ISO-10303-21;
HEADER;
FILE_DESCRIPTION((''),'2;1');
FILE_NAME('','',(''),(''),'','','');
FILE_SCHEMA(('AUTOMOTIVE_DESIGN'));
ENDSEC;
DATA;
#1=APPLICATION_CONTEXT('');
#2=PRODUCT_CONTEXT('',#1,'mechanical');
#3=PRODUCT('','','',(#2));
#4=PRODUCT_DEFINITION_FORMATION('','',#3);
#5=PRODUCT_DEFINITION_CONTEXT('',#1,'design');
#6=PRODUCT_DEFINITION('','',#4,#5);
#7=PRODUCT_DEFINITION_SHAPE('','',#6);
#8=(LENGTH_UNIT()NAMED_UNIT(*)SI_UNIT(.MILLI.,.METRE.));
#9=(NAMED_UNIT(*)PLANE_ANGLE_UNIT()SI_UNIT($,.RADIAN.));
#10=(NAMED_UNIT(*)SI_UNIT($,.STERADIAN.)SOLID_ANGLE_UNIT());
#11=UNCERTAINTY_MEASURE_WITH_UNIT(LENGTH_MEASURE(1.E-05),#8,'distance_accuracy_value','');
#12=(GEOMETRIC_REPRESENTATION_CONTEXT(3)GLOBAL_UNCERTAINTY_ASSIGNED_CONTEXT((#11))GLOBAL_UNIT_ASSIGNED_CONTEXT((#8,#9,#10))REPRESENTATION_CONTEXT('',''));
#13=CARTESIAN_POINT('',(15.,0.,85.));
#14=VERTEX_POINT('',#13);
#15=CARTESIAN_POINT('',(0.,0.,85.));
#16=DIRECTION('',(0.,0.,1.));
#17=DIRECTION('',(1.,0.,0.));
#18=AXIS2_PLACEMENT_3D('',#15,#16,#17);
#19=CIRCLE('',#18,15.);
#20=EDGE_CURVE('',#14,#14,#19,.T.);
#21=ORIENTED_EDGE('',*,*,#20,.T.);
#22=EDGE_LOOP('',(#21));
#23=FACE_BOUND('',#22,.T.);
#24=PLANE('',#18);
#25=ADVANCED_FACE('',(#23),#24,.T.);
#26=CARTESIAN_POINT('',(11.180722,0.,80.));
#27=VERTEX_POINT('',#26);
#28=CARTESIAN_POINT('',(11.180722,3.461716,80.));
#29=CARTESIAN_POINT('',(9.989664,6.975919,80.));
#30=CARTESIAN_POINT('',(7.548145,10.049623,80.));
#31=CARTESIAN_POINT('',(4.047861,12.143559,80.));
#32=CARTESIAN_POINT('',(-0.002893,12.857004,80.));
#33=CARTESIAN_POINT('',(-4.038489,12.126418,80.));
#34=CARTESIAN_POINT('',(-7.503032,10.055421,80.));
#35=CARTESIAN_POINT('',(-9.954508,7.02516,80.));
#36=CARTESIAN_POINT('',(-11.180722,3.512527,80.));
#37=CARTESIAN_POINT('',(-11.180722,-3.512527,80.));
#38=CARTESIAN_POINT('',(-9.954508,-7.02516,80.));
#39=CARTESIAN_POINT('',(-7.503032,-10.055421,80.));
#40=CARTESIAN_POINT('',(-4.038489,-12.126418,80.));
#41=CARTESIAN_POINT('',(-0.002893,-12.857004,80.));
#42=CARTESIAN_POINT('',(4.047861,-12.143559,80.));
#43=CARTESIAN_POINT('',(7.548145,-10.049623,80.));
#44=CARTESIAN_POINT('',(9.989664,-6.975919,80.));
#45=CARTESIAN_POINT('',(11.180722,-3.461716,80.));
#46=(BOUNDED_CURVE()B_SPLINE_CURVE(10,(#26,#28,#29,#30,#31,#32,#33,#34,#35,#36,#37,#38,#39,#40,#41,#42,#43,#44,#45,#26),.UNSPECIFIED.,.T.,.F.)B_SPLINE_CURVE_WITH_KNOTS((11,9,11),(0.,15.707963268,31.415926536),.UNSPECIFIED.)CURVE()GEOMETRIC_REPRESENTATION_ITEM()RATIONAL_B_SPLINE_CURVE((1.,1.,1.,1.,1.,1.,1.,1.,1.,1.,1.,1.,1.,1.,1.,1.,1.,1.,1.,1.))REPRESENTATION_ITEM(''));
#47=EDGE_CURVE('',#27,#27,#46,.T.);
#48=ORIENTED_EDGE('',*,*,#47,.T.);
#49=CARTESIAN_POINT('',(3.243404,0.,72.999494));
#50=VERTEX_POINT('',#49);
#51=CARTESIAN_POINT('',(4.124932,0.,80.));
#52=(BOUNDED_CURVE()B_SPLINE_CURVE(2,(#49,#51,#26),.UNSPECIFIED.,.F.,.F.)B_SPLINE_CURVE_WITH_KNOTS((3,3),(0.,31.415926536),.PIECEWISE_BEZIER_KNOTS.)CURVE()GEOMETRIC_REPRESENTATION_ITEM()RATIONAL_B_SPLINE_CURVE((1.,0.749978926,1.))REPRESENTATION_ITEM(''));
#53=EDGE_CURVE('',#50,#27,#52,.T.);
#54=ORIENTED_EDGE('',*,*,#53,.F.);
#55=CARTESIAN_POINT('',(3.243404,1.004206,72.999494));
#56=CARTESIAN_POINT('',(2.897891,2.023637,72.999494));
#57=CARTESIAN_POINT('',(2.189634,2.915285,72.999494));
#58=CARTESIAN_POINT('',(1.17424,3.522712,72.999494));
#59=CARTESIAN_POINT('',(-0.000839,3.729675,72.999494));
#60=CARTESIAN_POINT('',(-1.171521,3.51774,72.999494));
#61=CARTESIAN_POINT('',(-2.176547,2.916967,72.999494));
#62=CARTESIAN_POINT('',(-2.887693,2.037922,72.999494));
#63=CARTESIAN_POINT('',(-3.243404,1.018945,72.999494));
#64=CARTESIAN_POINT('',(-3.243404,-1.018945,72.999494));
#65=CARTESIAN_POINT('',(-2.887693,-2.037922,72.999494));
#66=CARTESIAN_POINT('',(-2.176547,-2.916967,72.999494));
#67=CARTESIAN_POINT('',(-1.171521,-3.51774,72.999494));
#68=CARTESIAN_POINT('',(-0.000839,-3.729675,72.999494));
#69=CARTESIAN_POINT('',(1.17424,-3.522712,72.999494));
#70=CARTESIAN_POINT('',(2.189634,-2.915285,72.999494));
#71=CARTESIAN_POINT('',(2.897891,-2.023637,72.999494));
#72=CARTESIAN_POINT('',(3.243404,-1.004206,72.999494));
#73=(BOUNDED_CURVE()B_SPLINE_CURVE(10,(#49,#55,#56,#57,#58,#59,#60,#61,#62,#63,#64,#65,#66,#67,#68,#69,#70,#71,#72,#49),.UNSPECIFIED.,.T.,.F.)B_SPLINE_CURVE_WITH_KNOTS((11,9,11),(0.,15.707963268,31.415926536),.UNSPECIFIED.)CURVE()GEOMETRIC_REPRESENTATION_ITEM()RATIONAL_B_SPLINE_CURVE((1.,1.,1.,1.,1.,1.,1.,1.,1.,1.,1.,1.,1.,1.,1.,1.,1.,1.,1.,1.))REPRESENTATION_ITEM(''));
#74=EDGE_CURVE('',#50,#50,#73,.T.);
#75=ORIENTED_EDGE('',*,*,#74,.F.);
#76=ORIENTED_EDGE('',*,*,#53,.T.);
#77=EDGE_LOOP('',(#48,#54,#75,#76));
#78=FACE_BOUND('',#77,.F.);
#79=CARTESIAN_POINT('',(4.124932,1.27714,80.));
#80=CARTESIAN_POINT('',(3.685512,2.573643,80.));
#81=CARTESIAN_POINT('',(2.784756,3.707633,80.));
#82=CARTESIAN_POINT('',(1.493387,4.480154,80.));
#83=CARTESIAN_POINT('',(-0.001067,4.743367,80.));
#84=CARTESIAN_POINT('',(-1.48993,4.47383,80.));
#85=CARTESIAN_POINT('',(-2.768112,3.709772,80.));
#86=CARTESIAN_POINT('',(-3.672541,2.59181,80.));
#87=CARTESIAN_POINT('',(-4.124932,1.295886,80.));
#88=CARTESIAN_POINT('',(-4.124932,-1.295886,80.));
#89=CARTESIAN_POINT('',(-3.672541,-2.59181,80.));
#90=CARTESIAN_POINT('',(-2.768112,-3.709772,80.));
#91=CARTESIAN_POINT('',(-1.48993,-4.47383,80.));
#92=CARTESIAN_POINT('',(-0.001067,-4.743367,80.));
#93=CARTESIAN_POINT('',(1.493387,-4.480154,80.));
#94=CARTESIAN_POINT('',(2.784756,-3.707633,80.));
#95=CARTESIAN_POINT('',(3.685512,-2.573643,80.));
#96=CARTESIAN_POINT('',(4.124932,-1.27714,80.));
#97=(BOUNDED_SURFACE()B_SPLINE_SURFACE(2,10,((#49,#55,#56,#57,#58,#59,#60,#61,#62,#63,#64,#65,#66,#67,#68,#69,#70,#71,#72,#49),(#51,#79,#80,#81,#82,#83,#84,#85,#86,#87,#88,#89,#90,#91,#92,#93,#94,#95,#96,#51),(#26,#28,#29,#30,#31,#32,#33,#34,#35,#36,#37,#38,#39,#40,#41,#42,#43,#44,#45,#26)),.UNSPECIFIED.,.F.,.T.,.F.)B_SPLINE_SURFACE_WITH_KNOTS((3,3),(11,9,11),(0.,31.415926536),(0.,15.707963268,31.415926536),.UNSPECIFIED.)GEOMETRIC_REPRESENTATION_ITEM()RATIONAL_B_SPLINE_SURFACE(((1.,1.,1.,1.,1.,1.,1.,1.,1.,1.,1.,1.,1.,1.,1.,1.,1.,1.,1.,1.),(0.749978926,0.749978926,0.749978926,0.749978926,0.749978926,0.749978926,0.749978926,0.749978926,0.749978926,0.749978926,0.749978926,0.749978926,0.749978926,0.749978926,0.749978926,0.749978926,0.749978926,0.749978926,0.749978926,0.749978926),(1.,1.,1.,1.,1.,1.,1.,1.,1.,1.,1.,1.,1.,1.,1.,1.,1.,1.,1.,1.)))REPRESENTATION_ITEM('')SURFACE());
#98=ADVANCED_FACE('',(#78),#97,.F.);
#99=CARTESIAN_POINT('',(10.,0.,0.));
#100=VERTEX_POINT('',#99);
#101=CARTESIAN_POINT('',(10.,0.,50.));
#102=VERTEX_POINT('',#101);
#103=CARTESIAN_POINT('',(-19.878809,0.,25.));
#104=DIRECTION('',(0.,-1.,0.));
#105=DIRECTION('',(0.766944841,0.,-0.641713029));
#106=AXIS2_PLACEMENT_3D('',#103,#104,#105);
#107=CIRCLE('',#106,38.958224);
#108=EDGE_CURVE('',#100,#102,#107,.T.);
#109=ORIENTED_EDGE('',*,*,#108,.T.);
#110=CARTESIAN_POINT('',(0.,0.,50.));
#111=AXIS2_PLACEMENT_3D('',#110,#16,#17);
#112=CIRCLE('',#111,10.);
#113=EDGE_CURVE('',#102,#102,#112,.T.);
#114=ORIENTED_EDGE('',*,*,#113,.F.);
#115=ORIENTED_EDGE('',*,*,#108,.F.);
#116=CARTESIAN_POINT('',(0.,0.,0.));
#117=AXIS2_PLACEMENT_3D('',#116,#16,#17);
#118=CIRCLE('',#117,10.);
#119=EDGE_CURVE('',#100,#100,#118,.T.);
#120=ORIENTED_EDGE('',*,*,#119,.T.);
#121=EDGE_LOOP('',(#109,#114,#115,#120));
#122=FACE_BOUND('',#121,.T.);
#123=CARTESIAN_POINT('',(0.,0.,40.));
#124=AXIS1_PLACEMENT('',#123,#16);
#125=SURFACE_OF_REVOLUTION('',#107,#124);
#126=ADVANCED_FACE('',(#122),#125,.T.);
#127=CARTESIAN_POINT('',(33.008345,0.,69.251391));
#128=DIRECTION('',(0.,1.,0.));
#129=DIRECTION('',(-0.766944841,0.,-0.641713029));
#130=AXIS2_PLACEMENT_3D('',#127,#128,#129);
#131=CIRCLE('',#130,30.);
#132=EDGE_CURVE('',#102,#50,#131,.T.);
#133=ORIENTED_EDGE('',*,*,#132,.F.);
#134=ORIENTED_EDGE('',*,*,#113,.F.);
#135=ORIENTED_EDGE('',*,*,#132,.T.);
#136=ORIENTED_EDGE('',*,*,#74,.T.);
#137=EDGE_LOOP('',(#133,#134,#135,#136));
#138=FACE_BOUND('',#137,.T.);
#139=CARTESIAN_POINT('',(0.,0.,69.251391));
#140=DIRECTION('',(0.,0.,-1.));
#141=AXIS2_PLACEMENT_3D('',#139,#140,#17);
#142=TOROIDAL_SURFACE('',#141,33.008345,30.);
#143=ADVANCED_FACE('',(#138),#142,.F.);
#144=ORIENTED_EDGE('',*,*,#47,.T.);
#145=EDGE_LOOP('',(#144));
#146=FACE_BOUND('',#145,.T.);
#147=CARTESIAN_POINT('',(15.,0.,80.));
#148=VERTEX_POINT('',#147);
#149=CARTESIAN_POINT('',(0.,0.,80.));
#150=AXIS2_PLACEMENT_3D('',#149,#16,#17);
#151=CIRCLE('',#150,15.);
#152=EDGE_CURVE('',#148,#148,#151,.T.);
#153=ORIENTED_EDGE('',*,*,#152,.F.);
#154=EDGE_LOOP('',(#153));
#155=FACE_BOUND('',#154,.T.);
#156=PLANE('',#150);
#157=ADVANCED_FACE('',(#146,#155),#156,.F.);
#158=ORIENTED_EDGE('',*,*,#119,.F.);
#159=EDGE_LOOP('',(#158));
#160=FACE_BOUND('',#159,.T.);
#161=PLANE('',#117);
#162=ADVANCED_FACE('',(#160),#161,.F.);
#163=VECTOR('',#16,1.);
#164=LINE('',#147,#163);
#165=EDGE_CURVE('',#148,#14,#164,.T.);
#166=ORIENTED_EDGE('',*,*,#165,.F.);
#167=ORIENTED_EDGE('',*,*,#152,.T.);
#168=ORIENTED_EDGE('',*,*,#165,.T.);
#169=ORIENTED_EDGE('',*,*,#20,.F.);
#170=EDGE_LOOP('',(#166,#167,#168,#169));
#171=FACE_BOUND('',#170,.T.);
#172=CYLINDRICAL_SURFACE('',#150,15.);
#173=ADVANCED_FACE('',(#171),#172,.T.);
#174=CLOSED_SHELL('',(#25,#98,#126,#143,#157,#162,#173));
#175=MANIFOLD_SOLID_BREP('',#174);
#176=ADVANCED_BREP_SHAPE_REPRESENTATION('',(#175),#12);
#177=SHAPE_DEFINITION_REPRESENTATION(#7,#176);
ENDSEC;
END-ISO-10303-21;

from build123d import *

# Parameters (mm, degrees)
F2_R = 8


with BuildPart() as f1:
    # F0 (on Front) → F1 (revolve)
    with BuildSketch(Plane.XZ):
        with BuildLine():
            Line((0, 80), (0, 0))
            Line((0, 0), (10, 0))
            ThreePointArc((10, 0), (19.079415133, 25), (10, 50))
            ThreePointArc((10, 50), (3.4165275014, 64.3194212502), (5, 80))
            Line((5, 80), (15, 80))
            Line((15, 80), (15, 85))
            Line((15, 85), (0, 85))
            Line((0, 85), (0, 80))
        make_face()
    revolve(axis=Axis((0, 0, 40), (0, 0, 1)))

    # F2
    f2_edges = [f1.edges().sort_by_distance(p)[0] for p in [
        (-5, 0, 80),
    ]]
    fillet(f2_edges, radius=F2_R)


solid = f1.part
